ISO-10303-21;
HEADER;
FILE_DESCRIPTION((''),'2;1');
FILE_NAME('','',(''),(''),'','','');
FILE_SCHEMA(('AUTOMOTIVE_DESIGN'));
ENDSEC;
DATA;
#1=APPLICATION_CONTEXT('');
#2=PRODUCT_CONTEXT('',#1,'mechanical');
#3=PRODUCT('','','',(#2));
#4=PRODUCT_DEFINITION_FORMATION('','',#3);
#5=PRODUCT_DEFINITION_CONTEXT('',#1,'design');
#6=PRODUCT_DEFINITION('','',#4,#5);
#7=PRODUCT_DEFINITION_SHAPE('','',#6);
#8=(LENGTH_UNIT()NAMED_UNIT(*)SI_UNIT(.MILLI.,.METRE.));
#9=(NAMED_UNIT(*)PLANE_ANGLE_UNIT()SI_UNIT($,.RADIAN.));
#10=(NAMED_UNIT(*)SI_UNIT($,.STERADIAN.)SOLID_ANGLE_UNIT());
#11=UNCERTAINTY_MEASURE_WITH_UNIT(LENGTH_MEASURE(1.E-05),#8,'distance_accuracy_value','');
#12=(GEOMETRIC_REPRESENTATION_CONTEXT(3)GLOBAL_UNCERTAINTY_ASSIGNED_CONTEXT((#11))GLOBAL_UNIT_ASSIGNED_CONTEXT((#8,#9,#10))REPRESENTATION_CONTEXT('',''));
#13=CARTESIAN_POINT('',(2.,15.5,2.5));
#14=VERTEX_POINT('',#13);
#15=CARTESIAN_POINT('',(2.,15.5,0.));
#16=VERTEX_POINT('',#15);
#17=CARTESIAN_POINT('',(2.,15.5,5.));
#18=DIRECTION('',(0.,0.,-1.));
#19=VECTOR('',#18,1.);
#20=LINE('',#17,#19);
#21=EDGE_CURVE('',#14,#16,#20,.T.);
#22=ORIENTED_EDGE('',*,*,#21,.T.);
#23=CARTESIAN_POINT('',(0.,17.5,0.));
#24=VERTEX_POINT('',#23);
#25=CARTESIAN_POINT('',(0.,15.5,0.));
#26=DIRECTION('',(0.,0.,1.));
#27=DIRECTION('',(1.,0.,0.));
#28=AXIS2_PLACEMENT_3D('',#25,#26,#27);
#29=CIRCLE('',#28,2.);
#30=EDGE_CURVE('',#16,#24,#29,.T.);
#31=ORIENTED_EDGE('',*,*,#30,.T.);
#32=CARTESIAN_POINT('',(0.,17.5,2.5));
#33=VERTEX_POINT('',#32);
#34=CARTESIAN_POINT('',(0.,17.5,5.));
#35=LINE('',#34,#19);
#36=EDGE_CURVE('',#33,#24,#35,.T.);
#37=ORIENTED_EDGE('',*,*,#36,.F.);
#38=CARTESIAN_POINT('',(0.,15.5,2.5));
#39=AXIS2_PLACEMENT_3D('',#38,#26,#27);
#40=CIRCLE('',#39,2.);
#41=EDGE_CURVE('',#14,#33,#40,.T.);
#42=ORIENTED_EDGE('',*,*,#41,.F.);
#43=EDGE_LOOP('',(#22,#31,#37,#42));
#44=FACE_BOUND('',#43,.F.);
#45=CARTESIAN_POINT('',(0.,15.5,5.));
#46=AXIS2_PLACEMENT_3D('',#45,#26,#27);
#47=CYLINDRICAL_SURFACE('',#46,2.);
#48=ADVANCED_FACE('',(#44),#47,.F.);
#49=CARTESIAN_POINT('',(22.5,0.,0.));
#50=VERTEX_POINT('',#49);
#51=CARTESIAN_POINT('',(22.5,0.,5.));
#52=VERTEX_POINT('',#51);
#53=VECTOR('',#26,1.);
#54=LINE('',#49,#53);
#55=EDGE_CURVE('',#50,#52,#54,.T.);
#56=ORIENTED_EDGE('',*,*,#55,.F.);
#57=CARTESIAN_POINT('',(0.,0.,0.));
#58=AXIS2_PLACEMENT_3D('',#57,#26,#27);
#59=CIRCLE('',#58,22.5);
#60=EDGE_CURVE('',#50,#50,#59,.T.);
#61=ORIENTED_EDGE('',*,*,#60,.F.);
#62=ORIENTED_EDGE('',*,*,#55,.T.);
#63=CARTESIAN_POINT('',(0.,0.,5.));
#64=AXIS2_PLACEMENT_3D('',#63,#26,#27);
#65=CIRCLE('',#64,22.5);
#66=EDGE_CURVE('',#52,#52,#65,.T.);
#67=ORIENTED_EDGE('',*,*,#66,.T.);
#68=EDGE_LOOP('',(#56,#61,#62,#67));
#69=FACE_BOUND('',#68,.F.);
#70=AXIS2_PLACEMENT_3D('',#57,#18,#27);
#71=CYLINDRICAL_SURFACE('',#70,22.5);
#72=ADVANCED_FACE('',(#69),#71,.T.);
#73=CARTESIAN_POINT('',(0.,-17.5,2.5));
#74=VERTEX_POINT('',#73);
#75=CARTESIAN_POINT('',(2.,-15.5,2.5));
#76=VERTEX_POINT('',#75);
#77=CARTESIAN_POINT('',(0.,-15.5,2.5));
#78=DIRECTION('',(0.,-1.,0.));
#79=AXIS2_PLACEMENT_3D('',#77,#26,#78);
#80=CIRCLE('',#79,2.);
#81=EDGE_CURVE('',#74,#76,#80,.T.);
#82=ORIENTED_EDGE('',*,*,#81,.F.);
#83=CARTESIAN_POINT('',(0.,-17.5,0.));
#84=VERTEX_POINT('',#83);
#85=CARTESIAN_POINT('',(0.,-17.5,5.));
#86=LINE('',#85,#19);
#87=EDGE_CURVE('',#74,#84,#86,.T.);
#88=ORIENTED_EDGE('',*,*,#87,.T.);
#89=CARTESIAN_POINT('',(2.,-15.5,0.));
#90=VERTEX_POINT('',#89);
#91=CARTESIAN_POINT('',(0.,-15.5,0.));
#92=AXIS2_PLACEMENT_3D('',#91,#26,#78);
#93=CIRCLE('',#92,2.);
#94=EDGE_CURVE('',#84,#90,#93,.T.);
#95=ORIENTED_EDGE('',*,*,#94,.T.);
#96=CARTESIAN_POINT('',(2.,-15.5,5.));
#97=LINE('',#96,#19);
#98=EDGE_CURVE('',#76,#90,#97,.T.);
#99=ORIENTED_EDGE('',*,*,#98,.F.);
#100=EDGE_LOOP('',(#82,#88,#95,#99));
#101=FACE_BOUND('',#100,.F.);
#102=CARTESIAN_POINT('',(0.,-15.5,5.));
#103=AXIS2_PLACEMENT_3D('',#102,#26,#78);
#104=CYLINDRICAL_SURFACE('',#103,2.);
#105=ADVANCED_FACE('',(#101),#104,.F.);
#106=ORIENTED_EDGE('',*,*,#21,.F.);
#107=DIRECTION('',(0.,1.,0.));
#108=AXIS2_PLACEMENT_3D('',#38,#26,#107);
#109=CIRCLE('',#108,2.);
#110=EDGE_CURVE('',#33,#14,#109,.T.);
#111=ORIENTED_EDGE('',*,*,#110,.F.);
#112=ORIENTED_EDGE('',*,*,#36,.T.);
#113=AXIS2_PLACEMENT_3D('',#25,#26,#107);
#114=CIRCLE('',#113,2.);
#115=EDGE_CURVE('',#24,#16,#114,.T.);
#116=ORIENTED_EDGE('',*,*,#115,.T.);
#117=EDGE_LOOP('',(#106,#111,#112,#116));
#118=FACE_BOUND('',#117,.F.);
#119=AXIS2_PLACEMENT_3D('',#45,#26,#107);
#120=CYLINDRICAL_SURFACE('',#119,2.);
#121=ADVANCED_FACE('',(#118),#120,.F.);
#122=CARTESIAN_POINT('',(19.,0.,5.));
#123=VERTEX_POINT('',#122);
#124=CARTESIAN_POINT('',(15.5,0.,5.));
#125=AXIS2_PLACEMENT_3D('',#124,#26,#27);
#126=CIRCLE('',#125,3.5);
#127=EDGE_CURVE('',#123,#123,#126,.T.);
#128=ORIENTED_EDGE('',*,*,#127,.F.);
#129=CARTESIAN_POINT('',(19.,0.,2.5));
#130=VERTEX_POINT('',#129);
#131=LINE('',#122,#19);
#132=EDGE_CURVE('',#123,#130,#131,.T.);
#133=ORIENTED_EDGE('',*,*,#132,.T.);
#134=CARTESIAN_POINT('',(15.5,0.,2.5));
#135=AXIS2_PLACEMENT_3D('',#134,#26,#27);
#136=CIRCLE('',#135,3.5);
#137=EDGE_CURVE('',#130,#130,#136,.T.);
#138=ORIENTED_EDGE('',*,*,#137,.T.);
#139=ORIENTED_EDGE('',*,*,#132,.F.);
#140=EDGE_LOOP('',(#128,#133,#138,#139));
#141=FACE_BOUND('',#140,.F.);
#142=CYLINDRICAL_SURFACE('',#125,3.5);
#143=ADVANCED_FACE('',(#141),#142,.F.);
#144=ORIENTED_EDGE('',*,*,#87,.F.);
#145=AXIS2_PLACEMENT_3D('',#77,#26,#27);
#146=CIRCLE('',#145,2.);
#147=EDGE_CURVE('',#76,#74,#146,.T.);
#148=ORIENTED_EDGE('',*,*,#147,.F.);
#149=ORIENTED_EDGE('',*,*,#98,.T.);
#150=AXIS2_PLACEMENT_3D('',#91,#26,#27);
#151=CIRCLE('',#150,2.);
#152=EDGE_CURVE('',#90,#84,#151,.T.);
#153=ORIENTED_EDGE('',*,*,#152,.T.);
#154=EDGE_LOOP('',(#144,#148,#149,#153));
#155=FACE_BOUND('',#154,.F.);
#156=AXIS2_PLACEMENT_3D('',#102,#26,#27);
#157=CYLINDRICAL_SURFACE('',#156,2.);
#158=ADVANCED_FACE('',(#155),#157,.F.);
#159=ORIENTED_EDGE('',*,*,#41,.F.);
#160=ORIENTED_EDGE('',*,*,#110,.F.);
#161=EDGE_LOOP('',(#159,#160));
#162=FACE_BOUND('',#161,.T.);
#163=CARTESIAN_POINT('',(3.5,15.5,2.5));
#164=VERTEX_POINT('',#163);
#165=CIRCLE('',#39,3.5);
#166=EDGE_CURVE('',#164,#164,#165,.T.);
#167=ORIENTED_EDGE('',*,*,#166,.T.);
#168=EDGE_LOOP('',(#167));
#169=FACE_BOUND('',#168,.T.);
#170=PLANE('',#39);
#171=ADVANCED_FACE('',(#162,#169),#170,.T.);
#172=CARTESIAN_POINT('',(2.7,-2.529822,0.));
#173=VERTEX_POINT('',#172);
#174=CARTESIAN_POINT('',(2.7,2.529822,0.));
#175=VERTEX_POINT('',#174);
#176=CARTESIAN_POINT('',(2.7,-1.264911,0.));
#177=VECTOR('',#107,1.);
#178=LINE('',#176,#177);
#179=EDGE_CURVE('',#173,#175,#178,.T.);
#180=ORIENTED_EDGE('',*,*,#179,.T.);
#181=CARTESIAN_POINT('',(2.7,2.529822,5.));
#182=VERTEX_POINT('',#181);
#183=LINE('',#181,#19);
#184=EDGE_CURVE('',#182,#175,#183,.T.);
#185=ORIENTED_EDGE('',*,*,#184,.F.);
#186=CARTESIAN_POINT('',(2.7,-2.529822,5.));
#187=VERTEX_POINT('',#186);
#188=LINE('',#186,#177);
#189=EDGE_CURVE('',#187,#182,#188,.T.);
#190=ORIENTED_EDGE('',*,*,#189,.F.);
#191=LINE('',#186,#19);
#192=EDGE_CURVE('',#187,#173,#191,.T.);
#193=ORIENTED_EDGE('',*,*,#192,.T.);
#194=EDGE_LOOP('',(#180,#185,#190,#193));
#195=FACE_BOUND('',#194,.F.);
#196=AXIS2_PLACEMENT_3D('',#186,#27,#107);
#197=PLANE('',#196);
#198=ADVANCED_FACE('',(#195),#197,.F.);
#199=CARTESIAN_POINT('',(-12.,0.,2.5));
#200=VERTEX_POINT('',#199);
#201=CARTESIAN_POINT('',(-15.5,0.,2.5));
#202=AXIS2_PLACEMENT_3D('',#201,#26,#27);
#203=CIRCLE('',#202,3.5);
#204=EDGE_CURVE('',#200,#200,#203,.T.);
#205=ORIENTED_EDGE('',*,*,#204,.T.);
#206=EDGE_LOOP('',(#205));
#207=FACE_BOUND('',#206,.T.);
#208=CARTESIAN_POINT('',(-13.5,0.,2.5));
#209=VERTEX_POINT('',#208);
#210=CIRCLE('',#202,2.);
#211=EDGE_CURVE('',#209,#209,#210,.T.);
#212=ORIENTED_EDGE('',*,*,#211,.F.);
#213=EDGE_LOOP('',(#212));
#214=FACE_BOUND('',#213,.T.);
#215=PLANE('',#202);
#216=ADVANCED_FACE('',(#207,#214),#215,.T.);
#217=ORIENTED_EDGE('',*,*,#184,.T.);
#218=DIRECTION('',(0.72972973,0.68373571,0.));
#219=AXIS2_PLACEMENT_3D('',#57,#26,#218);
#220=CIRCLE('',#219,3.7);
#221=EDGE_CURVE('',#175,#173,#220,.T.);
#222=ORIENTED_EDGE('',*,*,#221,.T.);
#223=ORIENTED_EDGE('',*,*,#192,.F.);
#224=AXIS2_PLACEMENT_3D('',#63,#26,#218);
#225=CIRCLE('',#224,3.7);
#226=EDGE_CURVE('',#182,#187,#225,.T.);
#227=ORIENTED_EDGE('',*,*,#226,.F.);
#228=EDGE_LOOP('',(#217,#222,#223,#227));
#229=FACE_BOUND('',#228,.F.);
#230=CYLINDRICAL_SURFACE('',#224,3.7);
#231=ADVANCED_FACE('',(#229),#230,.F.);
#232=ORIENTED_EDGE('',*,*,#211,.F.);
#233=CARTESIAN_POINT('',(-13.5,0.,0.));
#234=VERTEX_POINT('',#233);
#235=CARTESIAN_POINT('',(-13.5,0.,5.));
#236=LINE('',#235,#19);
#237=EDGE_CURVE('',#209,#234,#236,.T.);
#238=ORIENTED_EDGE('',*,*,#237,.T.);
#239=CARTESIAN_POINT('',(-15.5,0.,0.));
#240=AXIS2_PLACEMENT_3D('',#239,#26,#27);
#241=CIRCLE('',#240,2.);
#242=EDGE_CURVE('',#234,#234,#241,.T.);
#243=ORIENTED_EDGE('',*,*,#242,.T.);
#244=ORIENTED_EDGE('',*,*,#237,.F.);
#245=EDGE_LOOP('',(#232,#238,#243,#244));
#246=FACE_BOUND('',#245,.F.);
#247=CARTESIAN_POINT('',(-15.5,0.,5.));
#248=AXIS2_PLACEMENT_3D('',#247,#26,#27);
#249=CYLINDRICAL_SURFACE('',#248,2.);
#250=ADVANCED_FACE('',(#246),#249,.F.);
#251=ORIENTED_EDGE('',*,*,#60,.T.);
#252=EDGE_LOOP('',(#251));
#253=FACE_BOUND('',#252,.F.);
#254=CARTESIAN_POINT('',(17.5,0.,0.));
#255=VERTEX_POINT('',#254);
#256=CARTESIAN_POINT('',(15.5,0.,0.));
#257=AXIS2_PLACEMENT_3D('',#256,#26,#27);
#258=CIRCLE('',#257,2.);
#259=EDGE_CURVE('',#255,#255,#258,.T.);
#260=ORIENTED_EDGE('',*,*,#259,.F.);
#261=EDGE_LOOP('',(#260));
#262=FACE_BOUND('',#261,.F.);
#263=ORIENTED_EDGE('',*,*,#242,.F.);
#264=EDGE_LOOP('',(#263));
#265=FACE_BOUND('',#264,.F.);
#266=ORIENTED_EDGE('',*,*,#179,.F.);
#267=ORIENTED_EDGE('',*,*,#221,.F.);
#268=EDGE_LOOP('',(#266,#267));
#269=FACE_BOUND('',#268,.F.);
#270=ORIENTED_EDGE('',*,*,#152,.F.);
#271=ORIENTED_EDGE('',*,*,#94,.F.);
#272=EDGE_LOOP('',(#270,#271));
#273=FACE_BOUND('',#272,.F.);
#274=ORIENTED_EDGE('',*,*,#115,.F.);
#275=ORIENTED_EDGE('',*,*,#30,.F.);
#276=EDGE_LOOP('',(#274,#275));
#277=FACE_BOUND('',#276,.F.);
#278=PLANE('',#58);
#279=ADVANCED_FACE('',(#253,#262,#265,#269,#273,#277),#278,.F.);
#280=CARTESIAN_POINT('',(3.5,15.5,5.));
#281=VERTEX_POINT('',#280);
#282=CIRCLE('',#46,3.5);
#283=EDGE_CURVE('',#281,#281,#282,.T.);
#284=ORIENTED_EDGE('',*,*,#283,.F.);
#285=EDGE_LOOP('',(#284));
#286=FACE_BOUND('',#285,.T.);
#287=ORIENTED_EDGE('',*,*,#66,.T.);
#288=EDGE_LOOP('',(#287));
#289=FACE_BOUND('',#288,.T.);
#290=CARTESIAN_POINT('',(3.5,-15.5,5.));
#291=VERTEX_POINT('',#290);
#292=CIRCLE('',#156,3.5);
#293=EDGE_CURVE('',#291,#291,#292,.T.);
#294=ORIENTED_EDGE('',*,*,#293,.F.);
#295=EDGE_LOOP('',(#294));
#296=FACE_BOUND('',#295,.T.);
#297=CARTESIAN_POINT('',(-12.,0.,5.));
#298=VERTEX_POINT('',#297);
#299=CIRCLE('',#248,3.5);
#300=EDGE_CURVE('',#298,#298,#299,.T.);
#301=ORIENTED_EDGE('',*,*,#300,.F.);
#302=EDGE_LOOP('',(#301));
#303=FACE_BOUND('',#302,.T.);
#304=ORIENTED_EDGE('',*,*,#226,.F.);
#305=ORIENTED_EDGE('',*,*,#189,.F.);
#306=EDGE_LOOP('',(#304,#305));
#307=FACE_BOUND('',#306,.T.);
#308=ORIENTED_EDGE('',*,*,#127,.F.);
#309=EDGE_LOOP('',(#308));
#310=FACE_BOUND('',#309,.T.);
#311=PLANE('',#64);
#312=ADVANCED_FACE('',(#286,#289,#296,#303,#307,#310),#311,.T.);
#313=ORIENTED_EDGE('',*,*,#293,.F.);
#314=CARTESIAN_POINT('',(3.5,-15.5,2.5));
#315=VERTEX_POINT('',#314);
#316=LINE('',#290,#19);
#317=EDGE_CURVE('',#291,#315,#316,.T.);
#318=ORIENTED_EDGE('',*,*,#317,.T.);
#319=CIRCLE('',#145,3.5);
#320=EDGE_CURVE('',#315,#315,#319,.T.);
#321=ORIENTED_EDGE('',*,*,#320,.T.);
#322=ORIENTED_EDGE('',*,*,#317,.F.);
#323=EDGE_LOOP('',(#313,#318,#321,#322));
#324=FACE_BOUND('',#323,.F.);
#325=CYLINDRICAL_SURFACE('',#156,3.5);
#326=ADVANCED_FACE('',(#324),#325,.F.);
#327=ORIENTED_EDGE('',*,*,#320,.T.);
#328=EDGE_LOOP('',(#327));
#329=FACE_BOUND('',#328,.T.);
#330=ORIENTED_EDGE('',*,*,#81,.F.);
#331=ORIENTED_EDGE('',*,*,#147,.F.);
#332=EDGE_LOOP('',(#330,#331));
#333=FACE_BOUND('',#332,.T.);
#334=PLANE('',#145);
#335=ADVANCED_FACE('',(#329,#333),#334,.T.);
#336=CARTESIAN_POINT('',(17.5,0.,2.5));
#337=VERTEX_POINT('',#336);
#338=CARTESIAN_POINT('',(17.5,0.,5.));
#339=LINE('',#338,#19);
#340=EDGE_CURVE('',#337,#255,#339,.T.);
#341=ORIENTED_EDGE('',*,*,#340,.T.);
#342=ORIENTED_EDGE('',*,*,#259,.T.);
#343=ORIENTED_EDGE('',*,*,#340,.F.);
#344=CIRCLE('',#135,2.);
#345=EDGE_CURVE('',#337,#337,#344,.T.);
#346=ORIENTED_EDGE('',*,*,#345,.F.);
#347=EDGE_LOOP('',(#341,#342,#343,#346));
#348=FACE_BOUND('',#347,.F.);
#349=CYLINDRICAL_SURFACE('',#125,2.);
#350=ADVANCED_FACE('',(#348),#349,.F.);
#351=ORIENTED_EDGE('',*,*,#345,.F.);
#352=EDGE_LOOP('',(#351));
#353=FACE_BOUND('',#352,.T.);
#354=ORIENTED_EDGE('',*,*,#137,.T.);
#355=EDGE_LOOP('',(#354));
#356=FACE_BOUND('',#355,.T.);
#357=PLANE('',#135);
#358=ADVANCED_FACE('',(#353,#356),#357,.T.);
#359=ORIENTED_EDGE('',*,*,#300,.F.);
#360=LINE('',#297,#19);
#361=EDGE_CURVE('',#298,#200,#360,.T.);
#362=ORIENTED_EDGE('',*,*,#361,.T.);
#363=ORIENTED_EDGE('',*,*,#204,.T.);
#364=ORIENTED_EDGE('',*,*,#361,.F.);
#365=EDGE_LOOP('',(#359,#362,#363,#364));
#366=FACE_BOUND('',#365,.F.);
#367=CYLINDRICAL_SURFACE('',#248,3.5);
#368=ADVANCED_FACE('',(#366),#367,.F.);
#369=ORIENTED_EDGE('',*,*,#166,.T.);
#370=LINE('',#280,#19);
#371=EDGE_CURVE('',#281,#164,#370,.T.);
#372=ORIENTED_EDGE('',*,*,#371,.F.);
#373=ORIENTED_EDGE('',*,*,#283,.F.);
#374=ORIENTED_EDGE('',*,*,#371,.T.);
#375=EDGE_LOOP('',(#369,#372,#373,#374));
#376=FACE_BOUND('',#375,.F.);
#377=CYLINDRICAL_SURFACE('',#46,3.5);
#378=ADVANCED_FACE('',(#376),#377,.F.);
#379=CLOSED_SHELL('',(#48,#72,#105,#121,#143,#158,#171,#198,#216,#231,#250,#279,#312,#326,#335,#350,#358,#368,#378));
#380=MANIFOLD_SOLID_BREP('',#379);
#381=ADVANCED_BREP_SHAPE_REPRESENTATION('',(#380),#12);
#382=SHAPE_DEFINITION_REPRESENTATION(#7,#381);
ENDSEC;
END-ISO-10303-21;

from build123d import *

# Parameters (mm, degrees)
F0_R     = 22.5
F1_DEPTH = 5
F3_DEPTH = 25
F5_DEPTH = 25
F6_R     = 2
F7_DEPTH = 25
F8_R     = 3.5
F9_DEPTH = 2.5


with BuildPart() as f1:
    # F0 (on Top) → F1 (new body)
    with BuildSketch(Plane.XY):
        Circle(F0_R)
    extrude(amount=F1_DEPTH)

    # F2 (on face) → F3 (cut)
    with BuildSketch(Plane.XY.offset(5)):
        with BuildLine():
            Line((2.7, 0), (2.7, 2.5298221281))
            ThreePointArc((2.7, 2.5298221281), (-3.7, 0), (2.7, -2.5298221281))
            Line((2.7, -2.5298221281), (2.7, 0))
        make_face()
    extrude(amount=-F3_DEPTH, mode=Mode.SUBTRACT)

    # F4 (on face) → F5 (cut)
    with BuildSketch(Plane.XY.offset(5)):
        with BuildLine():
            ThreePointArc((0, 17.5), (-1.4142135624, 14.0857864376), (2, 15.5))
            ThreePointArc((2, 15.5), (1.4142135624, 16.9142135624), (0, 17.5))
        make_face()
    extrude(amount=-F5_DEPTH, mode=Mode.SUBTRACT)

    # F6 (on face) → F7 (cut)
    with BuildSketch(Plane.XY.offset(5)):
        with Locations((15.5, 0)):
            Circle(F6_R)
        with BuildLine():
            ThreePointArc((0, -17.5), (1.4142135624, -16.9142135624), (2, -15.5))
            ThreePointArc((2, -15.5), (-1.4142135624, -14.0857864376), (0, -17.5))
        make_face()
        with BuildLine():
            ThreePointArc((-17.5, 0), (-15.5, -2), (-13.5, 0))
            ThreePointArc((-13.5, 0), (-15.5, 2), (-17.5, 0))
        make_face()
    extrude(amount=-F7_DEPTH, mode=Mode.SUBTRACT)

    # F8 (on face) → F9 (cut)
    with BuildSketch(Plane.XY.offset(5)):
        with Locations((-15.5, 0)):
            Circle(F8_R)
        with Locations((15.5, 0)):
            Circle(F8_R)
        with Locations((0, -15.5)):
            Circle(F8_R)
        with Locations((0, 15.5)):
            Circle(F8_R)
    extrude(amount=-F9_DEPTH, mode=Mode.SUBTRACT)


solid = f1.part
